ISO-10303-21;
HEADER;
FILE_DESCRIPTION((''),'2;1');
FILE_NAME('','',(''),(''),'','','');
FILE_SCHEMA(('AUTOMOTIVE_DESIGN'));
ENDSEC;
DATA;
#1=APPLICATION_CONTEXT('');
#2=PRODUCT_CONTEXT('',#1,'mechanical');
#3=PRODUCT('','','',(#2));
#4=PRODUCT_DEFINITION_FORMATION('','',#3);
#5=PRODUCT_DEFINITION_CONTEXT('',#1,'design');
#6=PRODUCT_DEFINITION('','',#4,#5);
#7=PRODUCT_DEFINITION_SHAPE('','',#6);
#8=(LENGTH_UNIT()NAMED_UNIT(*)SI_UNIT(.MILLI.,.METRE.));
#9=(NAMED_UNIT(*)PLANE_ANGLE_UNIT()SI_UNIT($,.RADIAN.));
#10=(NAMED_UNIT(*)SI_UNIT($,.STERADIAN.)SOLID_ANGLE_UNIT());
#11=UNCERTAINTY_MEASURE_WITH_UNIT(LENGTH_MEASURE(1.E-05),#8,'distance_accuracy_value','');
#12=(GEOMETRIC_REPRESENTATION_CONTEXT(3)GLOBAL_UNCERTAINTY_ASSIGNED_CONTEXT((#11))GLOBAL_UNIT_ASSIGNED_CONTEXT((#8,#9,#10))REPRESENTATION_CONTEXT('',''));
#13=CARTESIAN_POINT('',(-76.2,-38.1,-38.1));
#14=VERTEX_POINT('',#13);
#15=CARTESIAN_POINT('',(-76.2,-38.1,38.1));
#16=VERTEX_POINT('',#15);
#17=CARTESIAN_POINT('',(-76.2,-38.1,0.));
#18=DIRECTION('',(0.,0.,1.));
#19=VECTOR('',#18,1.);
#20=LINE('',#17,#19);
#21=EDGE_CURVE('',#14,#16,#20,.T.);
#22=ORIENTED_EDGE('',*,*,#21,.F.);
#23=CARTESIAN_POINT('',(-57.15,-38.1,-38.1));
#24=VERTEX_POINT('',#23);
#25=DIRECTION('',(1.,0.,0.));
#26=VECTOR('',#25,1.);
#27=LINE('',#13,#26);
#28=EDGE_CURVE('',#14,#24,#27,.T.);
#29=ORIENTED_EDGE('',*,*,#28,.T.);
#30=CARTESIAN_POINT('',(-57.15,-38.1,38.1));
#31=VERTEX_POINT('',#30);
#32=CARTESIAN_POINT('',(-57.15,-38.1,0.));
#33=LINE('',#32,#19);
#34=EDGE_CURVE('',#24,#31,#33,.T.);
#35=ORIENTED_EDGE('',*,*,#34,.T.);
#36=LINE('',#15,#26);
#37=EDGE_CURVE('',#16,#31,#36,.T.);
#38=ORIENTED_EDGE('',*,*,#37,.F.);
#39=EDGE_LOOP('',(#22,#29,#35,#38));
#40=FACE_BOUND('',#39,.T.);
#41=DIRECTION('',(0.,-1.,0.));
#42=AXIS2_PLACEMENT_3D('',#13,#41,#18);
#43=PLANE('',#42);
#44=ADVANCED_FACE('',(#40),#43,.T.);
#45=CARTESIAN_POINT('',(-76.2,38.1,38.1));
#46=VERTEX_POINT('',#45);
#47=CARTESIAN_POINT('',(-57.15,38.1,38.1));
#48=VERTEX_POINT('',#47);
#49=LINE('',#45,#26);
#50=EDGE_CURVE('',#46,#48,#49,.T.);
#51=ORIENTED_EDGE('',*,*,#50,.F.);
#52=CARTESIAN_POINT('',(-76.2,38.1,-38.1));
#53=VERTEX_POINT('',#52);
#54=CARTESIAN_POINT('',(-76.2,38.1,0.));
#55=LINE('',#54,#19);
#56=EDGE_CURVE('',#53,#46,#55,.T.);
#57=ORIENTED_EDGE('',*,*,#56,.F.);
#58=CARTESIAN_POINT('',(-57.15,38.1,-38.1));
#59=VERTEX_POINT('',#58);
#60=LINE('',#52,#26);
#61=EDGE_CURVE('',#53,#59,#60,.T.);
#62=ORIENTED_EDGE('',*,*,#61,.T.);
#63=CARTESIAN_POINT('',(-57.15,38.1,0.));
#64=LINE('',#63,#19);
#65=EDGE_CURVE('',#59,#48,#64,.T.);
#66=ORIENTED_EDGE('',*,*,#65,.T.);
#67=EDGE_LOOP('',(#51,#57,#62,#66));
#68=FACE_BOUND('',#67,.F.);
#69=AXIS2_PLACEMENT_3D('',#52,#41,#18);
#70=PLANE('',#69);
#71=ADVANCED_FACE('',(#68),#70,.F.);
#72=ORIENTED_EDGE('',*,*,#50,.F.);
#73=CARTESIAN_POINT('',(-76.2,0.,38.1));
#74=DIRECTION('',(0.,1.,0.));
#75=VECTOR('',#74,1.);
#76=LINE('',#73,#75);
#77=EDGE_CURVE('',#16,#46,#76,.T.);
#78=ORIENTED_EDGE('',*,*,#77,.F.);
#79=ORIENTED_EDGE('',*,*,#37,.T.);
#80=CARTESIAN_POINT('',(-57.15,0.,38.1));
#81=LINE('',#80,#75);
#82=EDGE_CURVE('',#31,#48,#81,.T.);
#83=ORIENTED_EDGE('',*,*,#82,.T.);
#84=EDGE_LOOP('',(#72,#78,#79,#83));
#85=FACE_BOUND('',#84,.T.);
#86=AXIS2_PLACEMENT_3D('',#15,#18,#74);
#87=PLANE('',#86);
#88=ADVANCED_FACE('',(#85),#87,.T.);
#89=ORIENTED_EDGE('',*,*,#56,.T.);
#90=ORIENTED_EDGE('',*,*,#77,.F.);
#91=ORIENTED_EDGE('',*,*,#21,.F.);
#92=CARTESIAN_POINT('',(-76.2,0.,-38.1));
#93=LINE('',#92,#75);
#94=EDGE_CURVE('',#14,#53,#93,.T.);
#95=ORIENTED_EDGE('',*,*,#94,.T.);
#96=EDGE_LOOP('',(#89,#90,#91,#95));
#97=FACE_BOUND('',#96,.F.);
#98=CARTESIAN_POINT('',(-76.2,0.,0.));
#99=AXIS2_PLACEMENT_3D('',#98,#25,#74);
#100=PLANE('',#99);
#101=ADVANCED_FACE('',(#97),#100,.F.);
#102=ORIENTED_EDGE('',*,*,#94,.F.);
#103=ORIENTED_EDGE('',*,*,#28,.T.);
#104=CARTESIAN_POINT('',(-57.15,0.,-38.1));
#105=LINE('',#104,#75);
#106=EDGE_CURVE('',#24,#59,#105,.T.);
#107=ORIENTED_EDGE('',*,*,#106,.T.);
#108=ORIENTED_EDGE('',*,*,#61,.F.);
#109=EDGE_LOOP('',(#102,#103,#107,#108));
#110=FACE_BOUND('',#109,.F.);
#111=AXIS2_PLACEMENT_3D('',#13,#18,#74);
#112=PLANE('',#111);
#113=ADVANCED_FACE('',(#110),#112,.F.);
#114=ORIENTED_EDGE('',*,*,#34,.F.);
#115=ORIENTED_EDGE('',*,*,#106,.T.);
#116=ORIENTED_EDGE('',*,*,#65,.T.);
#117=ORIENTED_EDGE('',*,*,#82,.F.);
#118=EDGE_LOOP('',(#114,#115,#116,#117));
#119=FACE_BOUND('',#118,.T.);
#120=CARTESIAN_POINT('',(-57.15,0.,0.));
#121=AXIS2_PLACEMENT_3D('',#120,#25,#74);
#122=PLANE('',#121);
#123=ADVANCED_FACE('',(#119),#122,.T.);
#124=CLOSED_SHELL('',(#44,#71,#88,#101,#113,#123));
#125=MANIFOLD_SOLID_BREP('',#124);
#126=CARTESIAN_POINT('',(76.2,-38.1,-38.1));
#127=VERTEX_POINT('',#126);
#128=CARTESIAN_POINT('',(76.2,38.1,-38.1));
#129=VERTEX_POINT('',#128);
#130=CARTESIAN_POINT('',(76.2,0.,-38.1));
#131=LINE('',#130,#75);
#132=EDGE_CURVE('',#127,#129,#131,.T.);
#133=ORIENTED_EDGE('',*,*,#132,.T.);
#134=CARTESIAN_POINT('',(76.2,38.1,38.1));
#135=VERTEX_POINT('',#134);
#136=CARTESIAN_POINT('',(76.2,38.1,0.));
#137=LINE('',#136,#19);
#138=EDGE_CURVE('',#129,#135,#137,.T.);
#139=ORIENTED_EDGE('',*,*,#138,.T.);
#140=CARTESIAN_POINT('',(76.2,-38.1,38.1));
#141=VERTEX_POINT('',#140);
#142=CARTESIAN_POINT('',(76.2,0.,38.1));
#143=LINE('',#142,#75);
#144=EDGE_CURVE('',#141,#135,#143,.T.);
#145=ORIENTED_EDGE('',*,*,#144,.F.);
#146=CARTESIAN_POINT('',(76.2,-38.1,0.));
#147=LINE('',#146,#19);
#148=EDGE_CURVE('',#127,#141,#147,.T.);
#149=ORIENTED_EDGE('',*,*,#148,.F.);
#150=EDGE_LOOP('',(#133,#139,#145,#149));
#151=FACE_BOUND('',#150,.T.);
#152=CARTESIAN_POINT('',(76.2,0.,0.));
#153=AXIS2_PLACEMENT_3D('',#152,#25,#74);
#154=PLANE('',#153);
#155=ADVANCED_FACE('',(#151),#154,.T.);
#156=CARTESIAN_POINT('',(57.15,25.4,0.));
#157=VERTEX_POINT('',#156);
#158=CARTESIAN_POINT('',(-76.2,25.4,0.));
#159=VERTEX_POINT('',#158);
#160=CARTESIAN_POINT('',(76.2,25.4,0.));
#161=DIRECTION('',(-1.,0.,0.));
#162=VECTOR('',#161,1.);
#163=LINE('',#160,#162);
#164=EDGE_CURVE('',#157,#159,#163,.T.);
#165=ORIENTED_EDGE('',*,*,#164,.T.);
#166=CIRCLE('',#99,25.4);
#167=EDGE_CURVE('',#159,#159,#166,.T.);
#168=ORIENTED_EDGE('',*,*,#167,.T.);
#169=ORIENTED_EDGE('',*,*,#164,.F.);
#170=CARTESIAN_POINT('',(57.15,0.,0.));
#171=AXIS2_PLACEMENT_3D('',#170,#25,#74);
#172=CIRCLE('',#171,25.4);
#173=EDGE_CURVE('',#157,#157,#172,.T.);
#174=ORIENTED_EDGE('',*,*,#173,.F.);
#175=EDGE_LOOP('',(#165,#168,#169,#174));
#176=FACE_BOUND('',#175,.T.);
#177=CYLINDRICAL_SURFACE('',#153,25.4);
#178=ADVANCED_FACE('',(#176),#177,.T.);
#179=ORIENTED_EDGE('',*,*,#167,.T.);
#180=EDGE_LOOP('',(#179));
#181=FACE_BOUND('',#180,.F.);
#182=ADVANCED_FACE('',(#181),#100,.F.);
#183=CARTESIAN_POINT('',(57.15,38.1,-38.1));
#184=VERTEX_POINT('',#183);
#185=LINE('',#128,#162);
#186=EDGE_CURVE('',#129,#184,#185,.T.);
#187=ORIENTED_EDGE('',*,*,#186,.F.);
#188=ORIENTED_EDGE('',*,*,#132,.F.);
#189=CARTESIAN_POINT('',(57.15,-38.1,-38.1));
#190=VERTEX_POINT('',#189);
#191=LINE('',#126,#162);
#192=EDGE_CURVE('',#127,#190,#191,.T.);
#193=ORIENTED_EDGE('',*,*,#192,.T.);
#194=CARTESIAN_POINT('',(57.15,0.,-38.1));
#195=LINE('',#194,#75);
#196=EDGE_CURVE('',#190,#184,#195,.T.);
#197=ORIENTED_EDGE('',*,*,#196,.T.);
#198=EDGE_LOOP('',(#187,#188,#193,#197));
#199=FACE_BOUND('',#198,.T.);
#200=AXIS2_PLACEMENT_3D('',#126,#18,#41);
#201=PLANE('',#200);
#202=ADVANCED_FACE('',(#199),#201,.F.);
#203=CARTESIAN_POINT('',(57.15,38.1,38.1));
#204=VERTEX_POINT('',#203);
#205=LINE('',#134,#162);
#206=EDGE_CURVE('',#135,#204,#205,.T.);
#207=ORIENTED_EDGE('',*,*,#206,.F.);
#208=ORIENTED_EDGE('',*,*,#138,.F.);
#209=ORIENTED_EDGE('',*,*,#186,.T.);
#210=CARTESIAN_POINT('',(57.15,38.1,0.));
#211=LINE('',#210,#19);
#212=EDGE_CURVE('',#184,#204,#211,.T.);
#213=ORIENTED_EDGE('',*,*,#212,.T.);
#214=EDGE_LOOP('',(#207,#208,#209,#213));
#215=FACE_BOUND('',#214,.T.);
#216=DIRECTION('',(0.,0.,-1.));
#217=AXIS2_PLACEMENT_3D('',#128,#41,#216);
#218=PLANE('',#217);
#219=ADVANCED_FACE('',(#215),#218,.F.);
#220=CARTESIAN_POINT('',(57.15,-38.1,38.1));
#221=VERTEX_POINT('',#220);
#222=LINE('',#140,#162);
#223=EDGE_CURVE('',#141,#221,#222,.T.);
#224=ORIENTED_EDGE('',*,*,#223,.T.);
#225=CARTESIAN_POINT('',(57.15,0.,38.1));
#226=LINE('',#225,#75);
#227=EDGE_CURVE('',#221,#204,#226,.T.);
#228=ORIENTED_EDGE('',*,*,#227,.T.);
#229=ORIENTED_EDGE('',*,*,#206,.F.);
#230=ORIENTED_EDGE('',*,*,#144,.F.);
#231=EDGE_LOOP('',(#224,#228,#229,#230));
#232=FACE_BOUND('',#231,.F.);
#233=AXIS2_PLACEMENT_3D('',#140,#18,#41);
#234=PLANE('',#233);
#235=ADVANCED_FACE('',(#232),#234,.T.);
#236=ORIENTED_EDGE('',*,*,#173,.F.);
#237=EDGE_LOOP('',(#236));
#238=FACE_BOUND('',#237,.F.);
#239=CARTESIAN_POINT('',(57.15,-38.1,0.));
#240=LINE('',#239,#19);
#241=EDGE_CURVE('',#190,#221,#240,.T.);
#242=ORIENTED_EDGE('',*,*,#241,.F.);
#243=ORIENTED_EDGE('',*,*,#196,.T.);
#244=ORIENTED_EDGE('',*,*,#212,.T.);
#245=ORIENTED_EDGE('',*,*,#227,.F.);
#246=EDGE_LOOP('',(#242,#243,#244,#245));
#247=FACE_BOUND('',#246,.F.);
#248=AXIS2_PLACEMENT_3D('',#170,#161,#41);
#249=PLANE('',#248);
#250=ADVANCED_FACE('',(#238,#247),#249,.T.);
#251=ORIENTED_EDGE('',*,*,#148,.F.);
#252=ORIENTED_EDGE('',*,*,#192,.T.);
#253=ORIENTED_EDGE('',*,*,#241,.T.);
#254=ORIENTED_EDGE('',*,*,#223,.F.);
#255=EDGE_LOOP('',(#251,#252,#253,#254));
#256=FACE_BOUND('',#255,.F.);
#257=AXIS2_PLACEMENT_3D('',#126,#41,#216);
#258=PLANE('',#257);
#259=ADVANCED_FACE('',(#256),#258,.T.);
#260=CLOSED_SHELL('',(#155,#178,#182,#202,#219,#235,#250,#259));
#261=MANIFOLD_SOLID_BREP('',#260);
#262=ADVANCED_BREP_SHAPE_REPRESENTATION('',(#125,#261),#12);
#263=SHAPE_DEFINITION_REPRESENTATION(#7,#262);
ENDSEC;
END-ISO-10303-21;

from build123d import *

# Parameters (mm, degrees)
F0_W     = 76.2
F0_H     = 76.2
F1_DEPTH = 19.05
F4_R     = 25.4
F5_DEPTH = 152.4


# Not quite as in the source:
# - a feature names something its author has since deleted; it is built from what else it names


with BuildPart() as f1:
    # F0 (on Right) → F1 (new body)
    with BuildSketch(Plane.YZ):
        Rectangle(F0_W, F0_H)
    extrude(amount=F1_DEPTH)


with BuildPart() as f1_1:
    # F2: moved
    add(f1.part.moved(Location((-76.2, 0, 0))))


with BuildPart() as f3_1:
    # F3: instance of F1
    add(f1_1.part.mirror(Plane.YZ))

    # F4 (on face) → F5 (join)
    with BuildSketch(Plane.YZ.offset(76.2)):
        Circle(F4_R)
    extrude(amount=-F5_DEPTH)


solid = Compound([f1_1.part, f3_1.part])
